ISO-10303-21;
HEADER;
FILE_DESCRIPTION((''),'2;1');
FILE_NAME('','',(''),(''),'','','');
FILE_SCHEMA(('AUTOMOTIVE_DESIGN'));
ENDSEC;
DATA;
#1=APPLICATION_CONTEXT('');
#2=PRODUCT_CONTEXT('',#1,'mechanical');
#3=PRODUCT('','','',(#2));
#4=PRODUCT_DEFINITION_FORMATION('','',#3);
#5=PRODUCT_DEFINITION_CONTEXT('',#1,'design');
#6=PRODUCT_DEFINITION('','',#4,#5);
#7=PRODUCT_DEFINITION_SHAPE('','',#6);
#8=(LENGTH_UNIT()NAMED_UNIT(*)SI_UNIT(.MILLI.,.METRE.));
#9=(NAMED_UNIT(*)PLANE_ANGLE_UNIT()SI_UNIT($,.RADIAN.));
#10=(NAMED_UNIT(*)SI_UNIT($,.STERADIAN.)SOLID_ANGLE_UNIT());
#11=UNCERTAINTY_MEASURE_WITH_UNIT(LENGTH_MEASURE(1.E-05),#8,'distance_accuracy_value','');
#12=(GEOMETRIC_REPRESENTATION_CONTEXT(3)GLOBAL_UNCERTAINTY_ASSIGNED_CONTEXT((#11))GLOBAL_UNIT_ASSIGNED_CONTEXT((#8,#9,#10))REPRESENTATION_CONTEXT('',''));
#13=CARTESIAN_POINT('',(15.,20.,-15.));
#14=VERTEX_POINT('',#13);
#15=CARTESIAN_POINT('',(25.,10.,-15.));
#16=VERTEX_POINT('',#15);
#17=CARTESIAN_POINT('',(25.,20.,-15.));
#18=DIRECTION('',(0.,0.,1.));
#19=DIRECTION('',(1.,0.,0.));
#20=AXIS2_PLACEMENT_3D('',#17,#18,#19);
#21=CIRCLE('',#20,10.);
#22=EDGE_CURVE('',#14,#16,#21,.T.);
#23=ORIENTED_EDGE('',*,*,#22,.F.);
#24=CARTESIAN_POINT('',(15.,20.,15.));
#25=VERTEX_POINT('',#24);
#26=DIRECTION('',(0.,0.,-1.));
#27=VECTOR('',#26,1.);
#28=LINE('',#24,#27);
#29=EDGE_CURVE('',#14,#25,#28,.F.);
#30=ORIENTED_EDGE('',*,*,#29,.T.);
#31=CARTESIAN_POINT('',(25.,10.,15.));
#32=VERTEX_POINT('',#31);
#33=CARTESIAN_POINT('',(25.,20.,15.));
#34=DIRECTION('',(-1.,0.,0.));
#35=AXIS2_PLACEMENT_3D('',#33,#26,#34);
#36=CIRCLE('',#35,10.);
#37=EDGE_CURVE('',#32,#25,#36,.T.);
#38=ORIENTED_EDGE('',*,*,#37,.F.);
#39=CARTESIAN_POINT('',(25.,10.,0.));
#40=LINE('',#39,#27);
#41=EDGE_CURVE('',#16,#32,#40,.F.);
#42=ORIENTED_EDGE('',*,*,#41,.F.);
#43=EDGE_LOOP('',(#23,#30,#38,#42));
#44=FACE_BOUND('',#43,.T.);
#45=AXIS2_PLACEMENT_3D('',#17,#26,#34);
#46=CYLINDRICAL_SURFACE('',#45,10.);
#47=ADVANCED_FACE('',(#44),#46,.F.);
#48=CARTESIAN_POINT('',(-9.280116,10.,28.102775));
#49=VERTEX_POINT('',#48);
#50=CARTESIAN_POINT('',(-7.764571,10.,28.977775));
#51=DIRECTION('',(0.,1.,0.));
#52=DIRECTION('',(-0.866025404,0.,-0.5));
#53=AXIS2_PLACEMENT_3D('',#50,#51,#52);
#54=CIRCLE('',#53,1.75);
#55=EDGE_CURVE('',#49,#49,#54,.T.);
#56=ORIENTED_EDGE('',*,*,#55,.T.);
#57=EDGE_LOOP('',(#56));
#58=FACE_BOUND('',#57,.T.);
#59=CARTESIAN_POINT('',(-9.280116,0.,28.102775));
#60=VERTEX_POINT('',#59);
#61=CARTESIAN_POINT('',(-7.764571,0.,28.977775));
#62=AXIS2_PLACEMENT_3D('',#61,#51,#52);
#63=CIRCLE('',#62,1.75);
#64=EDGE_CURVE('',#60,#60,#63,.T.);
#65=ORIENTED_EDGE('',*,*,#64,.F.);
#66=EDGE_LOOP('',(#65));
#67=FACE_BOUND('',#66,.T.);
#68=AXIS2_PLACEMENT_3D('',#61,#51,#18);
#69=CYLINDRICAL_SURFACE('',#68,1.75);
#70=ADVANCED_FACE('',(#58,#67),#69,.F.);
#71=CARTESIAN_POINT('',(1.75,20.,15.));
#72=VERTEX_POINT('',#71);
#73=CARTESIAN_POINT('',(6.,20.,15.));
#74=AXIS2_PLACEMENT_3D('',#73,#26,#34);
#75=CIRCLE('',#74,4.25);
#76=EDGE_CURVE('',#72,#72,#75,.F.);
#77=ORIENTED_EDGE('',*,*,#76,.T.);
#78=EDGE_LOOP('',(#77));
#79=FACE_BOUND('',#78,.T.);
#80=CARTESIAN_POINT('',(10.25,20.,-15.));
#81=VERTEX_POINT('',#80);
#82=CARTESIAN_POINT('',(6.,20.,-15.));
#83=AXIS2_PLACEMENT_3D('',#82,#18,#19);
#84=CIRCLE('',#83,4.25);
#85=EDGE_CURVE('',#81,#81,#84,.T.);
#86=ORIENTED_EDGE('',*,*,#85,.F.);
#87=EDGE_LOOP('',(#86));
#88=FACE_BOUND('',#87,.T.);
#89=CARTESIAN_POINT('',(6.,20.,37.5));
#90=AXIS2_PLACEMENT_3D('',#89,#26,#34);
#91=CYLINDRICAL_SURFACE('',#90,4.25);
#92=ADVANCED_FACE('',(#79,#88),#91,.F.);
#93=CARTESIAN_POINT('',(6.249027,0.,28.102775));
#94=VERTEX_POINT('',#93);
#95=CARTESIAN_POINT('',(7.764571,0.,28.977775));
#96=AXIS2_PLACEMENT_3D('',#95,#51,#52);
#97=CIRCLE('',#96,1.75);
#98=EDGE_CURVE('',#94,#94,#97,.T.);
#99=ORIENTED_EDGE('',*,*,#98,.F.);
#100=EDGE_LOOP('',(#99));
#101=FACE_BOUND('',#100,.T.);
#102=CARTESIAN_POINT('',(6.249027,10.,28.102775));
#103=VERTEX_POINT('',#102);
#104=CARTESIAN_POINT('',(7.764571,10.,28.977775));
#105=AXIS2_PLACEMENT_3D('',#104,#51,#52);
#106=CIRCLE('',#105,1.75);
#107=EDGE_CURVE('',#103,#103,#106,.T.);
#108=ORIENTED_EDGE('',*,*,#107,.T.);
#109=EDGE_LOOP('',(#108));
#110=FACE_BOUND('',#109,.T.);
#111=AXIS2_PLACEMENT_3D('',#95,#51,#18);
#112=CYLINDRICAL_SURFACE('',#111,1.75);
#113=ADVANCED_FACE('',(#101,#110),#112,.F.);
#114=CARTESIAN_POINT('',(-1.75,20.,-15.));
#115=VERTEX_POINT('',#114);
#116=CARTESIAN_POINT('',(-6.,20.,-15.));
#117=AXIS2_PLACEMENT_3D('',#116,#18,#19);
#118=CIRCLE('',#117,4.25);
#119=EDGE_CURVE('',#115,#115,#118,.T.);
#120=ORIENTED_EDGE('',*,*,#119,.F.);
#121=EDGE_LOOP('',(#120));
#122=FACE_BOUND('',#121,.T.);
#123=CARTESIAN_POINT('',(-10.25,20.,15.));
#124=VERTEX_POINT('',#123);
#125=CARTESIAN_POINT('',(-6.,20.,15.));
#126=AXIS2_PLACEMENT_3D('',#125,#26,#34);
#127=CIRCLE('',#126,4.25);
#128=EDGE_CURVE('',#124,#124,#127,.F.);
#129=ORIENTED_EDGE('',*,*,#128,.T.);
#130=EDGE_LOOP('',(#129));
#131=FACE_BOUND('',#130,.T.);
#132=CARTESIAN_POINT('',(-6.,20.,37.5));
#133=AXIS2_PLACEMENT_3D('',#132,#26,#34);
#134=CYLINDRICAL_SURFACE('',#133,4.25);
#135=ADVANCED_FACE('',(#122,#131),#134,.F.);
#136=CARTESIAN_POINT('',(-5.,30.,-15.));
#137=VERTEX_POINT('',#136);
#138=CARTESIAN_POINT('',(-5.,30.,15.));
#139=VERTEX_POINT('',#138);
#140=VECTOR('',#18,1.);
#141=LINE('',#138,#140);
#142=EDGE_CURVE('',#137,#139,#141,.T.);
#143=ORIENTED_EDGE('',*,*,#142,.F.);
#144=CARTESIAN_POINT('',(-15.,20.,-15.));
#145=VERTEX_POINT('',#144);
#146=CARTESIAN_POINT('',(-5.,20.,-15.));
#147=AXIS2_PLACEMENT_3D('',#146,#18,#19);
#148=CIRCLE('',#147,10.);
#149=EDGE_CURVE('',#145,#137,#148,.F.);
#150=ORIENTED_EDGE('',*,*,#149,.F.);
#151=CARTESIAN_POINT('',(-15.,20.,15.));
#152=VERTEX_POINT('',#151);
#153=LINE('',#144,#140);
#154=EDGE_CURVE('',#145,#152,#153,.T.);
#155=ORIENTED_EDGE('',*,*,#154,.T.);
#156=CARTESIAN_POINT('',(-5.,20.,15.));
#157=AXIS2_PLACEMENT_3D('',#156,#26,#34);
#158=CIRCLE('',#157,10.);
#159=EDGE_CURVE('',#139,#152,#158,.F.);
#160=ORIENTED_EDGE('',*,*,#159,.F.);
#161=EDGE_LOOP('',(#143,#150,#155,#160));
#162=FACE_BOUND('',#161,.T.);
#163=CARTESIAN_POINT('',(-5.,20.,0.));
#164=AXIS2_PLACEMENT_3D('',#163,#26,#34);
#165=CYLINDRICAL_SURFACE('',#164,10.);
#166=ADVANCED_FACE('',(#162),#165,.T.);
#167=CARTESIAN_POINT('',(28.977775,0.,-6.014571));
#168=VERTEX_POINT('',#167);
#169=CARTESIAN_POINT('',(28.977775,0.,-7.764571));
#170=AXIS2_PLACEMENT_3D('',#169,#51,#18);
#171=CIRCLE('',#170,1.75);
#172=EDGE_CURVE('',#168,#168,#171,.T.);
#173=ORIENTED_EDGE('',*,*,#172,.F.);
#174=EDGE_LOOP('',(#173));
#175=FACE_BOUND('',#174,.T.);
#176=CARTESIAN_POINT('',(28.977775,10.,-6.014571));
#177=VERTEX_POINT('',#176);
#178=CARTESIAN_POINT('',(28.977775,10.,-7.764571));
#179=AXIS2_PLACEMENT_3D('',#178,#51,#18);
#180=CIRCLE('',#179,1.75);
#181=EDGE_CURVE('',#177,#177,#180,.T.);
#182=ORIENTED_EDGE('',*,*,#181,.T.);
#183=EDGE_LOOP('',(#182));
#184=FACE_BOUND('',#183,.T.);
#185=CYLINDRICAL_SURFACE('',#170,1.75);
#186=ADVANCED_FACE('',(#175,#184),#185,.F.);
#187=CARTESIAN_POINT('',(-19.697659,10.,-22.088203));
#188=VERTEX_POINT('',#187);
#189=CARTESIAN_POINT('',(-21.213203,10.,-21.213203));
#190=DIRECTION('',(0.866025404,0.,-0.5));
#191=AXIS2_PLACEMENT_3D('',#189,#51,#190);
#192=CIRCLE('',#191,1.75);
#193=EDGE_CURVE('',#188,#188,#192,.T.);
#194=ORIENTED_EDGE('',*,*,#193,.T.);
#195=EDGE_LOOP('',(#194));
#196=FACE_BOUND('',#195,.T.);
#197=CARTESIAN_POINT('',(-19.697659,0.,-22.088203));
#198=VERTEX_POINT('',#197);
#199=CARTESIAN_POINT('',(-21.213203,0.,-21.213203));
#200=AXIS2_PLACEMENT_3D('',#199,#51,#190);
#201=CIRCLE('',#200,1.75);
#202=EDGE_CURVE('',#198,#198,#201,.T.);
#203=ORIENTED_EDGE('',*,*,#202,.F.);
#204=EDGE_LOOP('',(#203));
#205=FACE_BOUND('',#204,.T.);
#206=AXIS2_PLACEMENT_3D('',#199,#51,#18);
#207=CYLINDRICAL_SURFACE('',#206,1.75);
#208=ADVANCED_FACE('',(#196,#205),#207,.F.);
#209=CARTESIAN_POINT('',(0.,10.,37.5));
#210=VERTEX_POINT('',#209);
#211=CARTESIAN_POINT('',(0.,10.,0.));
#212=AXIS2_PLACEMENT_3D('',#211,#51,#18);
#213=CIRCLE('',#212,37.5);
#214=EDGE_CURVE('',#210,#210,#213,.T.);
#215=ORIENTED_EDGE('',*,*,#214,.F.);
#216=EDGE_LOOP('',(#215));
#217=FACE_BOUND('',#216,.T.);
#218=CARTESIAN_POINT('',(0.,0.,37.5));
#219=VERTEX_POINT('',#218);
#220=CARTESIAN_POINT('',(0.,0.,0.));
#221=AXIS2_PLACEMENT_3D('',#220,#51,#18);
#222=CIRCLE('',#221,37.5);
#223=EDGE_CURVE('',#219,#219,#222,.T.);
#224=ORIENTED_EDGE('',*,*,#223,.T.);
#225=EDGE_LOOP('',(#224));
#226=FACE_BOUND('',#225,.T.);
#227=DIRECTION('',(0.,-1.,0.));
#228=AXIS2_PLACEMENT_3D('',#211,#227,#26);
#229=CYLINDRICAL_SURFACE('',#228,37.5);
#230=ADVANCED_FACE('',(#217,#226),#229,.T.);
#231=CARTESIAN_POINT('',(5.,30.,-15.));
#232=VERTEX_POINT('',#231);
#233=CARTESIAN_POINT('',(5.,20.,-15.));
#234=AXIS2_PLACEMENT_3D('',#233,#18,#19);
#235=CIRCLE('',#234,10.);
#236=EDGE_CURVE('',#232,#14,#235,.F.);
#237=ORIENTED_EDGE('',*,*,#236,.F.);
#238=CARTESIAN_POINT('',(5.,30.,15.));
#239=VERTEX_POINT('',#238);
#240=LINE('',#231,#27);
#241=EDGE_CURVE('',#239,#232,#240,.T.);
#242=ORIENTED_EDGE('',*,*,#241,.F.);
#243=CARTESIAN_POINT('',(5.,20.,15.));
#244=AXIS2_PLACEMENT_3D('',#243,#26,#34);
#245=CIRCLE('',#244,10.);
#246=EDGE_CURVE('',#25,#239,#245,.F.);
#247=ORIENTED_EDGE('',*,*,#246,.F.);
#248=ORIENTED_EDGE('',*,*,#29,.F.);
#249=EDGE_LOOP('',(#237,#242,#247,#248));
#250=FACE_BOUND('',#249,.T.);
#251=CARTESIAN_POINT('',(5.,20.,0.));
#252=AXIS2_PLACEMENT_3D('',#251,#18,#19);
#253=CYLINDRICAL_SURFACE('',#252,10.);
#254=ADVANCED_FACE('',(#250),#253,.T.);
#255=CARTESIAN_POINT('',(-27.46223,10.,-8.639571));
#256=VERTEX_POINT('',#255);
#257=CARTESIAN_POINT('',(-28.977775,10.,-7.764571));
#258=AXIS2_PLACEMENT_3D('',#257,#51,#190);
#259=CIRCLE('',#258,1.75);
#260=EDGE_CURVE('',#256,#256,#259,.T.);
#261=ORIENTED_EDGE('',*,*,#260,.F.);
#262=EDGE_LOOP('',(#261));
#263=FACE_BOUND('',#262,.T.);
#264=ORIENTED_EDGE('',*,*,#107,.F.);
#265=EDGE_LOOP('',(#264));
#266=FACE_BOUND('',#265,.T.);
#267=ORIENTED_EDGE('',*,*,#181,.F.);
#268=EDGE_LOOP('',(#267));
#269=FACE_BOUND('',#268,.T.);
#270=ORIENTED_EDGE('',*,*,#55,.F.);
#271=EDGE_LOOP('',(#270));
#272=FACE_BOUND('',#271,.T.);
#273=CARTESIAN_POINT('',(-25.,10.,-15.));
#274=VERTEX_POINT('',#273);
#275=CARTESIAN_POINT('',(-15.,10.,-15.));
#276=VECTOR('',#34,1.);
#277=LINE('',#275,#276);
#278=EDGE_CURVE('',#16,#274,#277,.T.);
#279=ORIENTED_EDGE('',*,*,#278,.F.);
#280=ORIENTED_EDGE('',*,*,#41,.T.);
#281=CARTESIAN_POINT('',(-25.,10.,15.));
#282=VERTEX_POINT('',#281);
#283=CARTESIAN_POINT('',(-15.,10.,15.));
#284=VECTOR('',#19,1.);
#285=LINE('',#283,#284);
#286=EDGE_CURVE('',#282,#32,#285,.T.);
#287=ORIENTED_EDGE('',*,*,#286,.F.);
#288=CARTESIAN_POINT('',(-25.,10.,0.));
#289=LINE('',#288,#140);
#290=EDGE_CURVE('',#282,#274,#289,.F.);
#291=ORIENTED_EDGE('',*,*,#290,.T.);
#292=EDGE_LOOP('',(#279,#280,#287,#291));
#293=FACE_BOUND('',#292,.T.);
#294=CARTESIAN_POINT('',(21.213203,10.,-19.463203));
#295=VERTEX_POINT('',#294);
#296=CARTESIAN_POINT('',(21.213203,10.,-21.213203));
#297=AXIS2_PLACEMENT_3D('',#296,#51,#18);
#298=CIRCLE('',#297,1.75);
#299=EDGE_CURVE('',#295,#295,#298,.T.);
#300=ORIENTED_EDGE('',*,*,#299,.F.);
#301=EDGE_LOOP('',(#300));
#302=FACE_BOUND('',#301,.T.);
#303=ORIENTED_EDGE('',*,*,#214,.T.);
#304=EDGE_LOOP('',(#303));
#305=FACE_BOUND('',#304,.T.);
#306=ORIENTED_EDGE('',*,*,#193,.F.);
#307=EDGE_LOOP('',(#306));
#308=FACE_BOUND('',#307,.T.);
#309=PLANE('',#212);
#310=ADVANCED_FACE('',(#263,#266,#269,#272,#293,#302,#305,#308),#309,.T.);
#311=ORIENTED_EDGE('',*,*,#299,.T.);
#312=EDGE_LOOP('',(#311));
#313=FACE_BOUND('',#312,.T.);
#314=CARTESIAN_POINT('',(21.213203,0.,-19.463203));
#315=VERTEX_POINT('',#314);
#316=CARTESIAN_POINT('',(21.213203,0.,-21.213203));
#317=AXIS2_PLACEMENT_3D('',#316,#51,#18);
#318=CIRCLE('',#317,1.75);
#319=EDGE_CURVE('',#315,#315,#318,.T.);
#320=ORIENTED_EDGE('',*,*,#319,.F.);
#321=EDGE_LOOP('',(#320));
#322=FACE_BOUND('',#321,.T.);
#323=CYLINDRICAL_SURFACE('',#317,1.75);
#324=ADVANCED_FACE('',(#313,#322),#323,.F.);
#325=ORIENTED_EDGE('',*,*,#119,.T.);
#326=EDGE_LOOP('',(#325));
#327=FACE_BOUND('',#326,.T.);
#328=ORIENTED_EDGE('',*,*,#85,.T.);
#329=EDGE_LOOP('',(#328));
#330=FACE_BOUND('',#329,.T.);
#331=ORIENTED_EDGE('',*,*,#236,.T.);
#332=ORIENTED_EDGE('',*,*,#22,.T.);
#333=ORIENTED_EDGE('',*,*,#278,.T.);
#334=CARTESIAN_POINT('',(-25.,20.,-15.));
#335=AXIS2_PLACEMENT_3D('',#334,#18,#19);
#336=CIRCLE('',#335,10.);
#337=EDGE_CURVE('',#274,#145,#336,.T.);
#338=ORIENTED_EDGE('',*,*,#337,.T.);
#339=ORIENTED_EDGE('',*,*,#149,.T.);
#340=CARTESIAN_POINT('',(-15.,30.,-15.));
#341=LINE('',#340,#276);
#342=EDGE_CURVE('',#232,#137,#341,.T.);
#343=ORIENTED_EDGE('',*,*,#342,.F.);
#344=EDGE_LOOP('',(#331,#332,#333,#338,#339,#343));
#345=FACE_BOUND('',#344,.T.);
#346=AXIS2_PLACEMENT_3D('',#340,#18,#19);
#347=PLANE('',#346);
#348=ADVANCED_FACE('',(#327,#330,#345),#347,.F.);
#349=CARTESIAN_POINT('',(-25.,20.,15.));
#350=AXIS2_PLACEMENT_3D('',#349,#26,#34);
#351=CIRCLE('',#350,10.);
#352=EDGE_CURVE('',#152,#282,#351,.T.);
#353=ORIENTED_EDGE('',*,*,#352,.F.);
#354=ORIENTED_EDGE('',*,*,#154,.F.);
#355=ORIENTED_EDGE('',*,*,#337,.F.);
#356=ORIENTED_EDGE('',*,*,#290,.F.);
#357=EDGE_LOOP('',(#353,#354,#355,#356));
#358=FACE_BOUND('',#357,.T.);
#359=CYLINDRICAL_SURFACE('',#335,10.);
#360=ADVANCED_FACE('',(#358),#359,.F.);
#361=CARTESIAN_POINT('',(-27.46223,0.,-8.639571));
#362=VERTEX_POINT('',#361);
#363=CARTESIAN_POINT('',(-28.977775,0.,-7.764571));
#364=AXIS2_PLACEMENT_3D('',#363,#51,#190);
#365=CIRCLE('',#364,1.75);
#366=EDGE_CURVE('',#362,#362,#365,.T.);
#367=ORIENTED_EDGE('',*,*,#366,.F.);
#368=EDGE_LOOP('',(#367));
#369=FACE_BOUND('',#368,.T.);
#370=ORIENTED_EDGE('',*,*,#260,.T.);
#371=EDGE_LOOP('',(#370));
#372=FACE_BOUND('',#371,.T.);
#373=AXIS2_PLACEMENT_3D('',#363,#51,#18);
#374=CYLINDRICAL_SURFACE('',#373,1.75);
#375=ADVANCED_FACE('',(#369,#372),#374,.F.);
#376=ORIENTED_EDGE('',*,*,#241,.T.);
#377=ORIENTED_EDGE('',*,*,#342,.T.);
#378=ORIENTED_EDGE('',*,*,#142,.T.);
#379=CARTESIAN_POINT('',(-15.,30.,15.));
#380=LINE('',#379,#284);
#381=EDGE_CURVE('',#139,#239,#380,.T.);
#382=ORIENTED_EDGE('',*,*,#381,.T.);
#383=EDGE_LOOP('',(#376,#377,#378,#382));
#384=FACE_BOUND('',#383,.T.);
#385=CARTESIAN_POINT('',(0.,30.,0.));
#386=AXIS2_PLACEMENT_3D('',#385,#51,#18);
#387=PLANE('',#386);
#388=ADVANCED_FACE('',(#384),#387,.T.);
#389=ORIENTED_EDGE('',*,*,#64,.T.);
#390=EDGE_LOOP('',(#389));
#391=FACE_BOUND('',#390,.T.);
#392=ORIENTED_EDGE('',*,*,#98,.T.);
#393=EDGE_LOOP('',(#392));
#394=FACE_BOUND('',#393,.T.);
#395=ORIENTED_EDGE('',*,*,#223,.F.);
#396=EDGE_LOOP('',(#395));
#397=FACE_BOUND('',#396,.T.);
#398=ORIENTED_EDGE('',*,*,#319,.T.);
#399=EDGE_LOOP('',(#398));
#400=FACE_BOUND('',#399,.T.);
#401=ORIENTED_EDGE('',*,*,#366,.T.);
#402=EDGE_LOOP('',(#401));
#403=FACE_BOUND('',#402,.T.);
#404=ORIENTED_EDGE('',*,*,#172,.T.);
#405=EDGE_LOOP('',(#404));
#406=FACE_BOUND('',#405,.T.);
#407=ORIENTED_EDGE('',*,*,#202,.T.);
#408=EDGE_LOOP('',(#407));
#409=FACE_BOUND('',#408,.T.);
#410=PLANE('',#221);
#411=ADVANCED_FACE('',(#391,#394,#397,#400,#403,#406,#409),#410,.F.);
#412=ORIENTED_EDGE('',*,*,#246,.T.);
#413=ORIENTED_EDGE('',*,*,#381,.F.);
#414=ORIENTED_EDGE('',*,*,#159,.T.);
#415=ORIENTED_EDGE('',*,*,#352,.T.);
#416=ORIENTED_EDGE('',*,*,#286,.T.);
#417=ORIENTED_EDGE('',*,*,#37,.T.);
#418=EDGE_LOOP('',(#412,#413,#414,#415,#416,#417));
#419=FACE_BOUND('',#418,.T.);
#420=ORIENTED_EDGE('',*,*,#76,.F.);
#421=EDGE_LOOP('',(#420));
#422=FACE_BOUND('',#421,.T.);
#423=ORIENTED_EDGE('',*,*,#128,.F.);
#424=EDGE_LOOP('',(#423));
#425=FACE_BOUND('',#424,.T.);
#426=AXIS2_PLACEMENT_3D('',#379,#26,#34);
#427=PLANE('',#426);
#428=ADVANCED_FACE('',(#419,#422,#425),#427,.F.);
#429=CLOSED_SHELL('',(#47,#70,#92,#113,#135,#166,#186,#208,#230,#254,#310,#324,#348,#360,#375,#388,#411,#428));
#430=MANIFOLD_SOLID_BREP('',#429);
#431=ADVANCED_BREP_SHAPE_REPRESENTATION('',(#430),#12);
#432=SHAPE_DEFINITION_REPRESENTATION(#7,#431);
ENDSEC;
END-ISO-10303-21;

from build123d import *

# Parameters (mm, degrees)
SKETCH1_R           = 37.5
BOSS_EXTRUDE1_DEPTH = 10
SKETCH9_R           = 1.75
CUT_EXTRUDE5_DEPTH  = 54.967582862
CIRPATTERN3_COUNT   = 3
SKETCH10_W          = 30
SKETCH10_H          = 30
BOSS_EXTRUDE2_DEPTH = 20
SKETCH11_R          = 4.25
CUT_EXTRUDE6_DEPTH  = 72.151247354
FILLET1_START       = -15
FILLET1_DEPTH       = 30
FILLET1_2_DEPTH     = 30


with BuildPart() as part:
    # Sketch1 → Boss-Extrude1 (new body)
    with BuildSketch(Plane(origin=(0, 0, 0), x_dir=(1, 0, 0), z_dir=(0, 1, 0))):
        with Locations(Location((0, 0, 0), (0, 0, 270))):
            Circle(SKETCH1_R)
    extrude(amount=BOSS_EXTRUDE1_DEPTH)

    # Sketch9 → Cut-Extrude5 (cut, through all)
    with BuildSketch(Plane(origin=(0, 10, 0), x_dir=(1, 0, 0), z_dir=(0, 1, 0))):
        with Locations(Location((21.213203436, 21.213203436, 0), (0, 0, 270))):
            Circle(SKETCH9_R)
        with Locations(Location((28.977774789, 7.764571353, 0), (0, 0, 270))):
            Circle(SKETCH9_R)
    cut_extrude5 = extrude(amount=-CUT_EXTRUDE5_DEPTH, mode=Mode.SUBTRACT)

    # CirPattern3: Cut-Extrude5 ×3 about axis
    cirpattern3_axis = Axis((0, 0, 0), (0, 1, 0))
    for i in range(1, CIRPATTERN3_COUNT):
        add(cut_extrude5.rotate(cirpattern3_axis, i * 360 / CIRPATTERN3_COUNT), mode=Mode.SUBTRACT)

    # Sketch10 → Boss-Extrude2 (add)
    with BuildSketch(Plane(origin=(0, 10, 0), x_dir=(1, 0, 0), z_dir=(0, 1, 0))):
        Rectangle(SKETCH10_W, SKETCH10_H)
    extrude(amount=BOSS_EXTRUDE2_DEPTH)

    # Sketch11 → Cut-Extrude6 (cut, through all)
    with BuildSketch(Plane.XY.offset(-15)):
        with Locations(Location((6, 20, 0), (0, 0, 180))):
            Circle(SKETCH11_R)
        with Locations(Location((-6, 20, 0), (0, 0, 180))):
            Circle(SKETCH11_R)
    extrude(amount=CUT_EXTRUDE6_DEPTH, mode=Mode.SUBTRACT)

    # Fillet1: read off the stored shape, not the designer's step
    # Fillet1 outline → Fillet1 (cut)
    with BuildSketch(Plane.XY.offset(FILLET1_START)):
        with BuildLine():
            ThreePointArc((5, 30), (12.071067812, 27.071067812), (15, 20))
            Line((15, 20), (15, 30))
            Line((15, 30), (5, 30))
        make_face()
        with BuildLine():
            ThreePointArc((-15, 20), (-12.071067812, 27.071067812), (-5, 30))
            Line((-5, 30), (-15, 30))
            Line((-15, 30), (-15, 20))
        make_face()
    extrude(amount=FILLET1_DEPTH, mode=Mode.SUBTRACT)

    # Fillet1 2 outline → Fillet1 2 (add)
    with BuildSketch(Plane.XY.offset(FILLET1_START)):
        with BuildLine():
            ThreePointArc((25, 10), (17.928932188, 12.928932188), (15, 20))
            Line((15, 20), (15, 10))
            Line((15, 10), (25, 10))
        make_face()
        with BuildLine():
            Line((-25, 10), (-15, 10))
            Line((-15, 10), (-15, 20))
            ThreePointArc((-15, 20), (-17.928932188, 12.928932188), (-25, 10))
        make_face()
    extrude(amount=FILLET1_2_DEPTH)


solid = part.part
